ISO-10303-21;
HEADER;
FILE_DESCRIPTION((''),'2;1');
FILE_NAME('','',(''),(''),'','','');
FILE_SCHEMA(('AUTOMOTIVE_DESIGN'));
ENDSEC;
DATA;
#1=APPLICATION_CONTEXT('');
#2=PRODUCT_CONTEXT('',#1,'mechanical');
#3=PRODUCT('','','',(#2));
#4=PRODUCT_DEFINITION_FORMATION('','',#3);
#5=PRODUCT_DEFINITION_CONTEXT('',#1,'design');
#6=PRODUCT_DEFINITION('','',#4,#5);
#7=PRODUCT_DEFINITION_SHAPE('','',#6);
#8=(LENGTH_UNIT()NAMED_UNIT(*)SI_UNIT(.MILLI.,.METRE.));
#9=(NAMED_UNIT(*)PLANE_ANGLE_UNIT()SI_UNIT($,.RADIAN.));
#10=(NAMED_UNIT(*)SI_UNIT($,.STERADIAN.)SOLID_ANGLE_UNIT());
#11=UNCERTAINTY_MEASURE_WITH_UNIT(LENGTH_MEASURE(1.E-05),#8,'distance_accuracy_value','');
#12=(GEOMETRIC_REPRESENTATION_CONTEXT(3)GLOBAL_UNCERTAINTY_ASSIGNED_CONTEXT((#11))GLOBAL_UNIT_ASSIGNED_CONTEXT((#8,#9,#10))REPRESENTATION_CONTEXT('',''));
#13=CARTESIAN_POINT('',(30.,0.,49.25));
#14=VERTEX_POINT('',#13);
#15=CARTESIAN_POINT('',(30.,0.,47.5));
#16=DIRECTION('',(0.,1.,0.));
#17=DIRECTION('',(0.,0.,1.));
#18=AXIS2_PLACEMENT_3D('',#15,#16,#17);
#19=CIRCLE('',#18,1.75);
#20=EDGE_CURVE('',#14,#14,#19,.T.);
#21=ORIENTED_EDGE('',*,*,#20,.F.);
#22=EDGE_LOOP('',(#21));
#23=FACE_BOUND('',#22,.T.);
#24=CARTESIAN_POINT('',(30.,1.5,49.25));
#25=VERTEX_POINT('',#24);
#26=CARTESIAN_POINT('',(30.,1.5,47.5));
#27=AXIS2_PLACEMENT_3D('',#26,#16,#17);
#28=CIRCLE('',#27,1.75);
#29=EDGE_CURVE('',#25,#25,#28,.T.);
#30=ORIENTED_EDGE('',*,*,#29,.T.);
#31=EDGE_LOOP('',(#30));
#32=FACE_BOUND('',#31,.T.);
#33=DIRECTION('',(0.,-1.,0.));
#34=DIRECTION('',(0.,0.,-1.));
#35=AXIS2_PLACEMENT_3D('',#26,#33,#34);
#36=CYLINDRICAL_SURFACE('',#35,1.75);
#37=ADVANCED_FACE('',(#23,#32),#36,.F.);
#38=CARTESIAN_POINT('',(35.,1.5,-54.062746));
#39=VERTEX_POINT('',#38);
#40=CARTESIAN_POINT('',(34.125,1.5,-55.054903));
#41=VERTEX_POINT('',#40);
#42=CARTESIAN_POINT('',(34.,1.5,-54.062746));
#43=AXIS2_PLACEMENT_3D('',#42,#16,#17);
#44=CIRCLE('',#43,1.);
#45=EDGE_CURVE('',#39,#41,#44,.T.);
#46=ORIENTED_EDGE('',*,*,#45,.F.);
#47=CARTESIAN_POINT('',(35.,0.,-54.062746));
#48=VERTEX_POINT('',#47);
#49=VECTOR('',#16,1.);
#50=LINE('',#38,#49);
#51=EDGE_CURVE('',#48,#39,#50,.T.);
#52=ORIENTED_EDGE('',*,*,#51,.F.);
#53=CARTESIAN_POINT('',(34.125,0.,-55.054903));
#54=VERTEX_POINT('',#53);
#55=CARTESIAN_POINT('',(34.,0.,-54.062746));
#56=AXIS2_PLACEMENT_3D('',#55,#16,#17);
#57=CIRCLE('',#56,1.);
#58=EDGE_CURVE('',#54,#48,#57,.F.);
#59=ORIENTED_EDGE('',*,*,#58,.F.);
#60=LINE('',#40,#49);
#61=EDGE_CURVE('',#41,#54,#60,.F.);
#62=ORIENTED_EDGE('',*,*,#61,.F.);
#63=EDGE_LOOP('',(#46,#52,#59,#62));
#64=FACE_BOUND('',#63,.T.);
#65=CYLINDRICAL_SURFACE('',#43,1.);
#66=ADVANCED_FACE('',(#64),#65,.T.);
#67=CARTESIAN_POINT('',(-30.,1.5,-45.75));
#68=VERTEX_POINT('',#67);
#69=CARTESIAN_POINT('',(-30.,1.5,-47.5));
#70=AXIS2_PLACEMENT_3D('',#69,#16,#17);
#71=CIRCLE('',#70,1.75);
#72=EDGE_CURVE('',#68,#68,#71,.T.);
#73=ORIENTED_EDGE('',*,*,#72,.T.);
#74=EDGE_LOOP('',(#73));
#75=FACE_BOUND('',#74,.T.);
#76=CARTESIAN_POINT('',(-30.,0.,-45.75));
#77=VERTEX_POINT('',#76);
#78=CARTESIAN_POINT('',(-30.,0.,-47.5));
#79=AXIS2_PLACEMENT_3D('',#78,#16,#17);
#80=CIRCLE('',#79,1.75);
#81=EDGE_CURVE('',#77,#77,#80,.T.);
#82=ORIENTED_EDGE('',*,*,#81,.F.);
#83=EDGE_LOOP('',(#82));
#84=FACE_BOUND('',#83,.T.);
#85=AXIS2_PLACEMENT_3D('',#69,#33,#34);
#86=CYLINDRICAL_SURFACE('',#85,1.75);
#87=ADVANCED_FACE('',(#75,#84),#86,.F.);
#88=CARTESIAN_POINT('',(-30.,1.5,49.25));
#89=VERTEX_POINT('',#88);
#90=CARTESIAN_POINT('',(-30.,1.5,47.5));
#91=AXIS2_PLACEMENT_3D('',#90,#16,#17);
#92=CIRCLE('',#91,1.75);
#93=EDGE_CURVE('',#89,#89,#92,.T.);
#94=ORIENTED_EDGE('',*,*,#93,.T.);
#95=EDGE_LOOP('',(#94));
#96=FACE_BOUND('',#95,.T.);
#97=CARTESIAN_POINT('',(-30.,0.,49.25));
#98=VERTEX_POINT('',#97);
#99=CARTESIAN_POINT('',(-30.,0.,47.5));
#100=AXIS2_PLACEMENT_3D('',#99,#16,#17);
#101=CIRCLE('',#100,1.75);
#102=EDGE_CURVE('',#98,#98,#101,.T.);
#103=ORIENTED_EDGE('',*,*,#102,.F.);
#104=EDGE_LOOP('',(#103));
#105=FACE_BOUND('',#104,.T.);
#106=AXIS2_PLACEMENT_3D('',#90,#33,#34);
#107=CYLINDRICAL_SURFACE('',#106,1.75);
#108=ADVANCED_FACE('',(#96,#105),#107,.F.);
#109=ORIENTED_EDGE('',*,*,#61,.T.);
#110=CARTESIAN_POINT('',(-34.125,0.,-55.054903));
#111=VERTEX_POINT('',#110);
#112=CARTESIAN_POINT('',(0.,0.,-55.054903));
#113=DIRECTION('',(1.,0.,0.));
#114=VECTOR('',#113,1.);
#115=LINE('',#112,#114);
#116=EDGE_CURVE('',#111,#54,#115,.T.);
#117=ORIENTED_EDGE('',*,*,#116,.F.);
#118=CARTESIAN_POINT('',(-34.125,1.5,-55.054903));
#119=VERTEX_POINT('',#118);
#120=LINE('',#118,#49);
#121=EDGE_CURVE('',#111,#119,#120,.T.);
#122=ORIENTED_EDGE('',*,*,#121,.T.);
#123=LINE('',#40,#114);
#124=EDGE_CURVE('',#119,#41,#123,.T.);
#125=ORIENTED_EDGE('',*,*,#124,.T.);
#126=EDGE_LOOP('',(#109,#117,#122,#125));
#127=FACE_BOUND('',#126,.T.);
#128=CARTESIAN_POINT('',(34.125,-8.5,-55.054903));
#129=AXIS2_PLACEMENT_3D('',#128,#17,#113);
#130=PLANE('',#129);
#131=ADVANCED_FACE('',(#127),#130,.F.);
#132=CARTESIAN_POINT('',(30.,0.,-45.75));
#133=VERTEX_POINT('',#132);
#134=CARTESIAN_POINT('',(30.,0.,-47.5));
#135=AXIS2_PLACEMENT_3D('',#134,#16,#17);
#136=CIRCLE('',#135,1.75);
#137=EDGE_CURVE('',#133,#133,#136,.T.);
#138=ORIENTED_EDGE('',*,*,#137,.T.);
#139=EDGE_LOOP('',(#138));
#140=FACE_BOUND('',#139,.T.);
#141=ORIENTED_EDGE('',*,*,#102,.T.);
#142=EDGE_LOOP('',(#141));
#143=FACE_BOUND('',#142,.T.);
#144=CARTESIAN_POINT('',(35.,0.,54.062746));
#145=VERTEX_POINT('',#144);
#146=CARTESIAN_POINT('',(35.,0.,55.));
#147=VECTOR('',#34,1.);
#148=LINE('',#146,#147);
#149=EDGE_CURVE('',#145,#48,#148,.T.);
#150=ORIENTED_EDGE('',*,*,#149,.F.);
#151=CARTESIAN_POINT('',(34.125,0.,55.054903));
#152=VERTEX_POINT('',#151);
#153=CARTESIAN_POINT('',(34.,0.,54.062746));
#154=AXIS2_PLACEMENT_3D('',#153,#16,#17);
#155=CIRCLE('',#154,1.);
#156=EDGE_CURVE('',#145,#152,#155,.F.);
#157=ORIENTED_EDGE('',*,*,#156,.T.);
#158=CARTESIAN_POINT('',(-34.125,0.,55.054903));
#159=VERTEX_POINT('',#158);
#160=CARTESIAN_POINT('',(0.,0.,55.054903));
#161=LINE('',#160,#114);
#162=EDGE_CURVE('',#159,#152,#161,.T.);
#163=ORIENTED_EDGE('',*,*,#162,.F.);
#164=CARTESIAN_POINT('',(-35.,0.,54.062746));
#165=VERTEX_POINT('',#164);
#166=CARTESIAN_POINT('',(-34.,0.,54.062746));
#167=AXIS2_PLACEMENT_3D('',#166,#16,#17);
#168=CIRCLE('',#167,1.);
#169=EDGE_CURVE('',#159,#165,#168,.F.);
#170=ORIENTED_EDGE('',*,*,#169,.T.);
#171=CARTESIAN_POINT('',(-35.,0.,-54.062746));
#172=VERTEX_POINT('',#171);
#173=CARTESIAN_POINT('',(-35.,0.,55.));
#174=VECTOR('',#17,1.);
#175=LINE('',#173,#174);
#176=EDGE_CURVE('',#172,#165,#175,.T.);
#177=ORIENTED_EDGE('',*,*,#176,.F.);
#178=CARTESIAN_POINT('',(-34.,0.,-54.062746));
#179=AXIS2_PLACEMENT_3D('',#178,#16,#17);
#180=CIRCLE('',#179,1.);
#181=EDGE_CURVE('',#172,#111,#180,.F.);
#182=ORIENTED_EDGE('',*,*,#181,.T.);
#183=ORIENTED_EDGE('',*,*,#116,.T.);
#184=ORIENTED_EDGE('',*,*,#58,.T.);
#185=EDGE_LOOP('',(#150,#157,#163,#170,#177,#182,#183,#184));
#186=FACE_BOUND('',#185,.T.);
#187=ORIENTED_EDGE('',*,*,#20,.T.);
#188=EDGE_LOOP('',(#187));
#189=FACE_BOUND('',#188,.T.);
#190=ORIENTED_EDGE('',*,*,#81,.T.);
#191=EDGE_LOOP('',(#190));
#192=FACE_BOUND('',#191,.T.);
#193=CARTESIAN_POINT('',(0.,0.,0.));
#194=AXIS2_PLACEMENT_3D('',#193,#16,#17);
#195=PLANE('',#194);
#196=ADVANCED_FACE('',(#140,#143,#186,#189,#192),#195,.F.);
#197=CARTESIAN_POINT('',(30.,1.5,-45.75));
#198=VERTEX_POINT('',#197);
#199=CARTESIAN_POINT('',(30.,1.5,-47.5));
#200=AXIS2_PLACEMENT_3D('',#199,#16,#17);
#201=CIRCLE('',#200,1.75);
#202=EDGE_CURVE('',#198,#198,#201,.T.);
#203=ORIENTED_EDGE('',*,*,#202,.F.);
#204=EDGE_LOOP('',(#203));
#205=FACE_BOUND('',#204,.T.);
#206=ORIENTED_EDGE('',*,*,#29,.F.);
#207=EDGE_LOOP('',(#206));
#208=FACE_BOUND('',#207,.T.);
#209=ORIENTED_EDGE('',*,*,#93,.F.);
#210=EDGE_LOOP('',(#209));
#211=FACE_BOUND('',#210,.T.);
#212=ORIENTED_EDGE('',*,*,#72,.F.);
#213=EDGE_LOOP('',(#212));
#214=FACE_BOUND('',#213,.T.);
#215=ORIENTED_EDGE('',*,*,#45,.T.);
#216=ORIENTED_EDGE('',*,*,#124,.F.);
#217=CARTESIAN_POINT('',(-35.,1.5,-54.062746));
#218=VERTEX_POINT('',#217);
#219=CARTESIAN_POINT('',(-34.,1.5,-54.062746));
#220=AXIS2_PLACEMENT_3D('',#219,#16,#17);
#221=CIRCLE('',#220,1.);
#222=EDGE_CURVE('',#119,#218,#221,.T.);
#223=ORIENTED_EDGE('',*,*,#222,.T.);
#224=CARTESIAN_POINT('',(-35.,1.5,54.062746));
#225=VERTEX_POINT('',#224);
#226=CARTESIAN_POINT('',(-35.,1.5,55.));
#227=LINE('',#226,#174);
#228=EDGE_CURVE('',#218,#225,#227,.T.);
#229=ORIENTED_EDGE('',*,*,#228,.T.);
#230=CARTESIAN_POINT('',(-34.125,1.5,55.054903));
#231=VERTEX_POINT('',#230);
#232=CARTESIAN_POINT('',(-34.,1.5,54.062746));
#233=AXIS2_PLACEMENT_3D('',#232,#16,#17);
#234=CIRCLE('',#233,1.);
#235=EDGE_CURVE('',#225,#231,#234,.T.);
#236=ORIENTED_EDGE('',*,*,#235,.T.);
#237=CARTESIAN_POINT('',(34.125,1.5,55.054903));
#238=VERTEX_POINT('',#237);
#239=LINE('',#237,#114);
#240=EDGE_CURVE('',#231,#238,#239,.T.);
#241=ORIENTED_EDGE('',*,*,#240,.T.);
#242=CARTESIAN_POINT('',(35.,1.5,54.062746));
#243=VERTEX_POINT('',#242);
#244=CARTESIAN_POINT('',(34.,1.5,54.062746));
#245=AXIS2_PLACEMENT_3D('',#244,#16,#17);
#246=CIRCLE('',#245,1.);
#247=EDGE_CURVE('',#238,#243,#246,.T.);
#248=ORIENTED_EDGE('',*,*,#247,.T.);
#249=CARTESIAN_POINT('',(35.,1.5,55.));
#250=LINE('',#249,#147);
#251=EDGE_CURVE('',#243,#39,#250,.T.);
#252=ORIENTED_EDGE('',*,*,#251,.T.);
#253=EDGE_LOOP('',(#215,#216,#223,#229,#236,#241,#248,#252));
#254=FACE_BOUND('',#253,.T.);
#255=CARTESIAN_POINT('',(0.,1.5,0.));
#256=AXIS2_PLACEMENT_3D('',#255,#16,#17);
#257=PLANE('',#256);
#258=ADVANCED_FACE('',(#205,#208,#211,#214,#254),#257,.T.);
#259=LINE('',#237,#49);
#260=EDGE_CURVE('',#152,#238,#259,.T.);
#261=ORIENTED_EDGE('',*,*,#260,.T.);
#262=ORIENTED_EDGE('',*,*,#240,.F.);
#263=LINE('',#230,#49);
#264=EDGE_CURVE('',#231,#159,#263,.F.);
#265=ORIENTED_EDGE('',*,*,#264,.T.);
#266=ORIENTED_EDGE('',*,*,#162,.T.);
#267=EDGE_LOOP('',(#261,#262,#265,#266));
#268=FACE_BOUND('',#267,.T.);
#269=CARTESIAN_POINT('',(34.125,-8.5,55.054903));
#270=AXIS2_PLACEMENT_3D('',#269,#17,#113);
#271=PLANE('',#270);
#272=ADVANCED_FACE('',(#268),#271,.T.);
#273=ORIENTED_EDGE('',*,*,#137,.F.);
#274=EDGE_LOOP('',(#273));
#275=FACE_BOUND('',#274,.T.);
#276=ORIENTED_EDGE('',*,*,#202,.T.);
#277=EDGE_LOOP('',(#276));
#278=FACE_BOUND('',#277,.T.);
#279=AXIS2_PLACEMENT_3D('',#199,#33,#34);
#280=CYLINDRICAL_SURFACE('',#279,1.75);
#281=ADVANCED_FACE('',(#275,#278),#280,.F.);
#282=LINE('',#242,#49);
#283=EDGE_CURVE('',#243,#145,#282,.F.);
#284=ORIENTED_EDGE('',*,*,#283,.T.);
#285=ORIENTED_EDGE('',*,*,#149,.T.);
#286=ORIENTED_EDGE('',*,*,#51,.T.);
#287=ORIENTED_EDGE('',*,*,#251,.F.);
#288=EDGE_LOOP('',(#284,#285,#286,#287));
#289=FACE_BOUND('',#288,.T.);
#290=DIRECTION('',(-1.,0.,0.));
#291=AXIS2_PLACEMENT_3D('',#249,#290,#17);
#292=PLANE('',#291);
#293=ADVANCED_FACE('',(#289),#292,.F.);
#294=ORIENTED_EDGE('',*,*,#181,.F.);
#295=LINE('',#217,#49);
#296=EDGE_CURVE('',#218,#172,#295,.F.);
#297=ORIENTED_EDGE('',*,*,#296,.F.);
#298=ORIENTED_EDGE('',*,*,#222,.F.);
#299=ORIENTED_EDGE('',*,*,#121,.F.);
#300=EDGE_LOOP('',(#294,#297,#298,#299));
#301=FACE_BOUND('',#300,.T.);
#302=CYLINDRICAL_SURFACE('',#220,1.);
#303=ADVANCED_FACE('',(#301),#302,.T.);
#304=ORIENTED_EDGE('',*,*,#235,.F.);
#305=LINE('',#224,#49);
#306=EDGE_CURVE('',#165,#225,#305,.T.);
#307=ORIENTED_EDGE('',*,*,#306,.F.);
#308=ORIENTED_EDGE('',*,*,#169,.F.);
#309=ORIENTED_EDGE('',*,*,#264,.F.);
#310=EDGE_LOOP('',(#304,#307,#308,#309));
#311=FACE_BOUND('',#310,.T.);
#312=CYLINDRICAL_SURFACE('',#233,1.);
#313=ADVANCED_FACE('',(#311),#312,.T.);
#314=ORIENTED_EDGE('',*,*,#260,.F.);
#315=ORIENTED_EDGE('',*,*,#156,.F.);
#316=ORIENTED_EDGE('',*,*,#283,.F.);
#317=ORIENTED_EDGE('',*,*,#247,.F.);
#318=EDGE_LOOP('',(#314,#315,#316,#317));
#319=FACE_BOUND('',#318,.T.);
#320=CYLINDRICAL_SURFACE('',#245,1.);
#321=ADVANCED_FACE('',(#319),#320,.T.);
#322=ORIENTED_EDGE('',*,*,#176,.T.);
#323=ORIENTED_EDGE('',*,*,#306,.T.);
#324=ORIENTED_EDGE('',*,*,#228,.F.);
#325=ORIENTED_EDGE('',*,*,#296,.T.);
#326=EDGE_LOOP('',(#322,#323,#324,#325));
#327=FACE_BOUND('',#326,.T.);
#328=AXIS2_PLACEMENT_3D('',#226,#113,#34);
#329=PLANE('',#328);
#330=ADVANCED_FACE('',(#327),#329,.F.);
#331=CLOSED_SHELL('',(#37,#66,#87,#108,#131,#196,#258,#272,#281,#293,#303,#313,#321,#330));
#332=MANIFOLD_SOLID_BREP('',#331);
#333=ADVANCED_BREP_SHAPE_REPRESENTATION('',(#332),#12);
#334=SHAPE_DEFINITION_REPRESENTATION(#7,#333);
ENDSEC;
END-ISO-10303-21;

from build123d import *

# Parameters (mm, degrees)
SKETCH1_R           = 1.75
BOSS_EXTRUDE1_DEPTH = 1.5
FILLET1_R           = 7
FILLET2_R           = 1
FILLET3_R           = 50
SKETCH2_W           = 103.402572328
SKETCH2_H           = 105.78008475
CUT_EXTRUDE1_DEPTH  = 10


with BuildPart() as part:
    # Sketch1 → Boss-Extrude1 (new body)
    with BuildSketch(Plane(origin=(0, 0, 0), x_dir=(1, 0, 0), z_dir=(0, 1, 0))):
        Polygon((-35, -55), (-28, -55), (-28, -132), (0, -144), (28, -132), (28, -55), (35, -55), (35, 55), (28, 55), (28, 132), (0, 144), (-28, 132), (-28, 55), (-35, 55), align=None)
        with Locations(Location((-30, 47.5, 0), (0, 0, 270))):
            Circle(SKETCH1_R, mode=Mode.SUBTRACT)
        with Locations(Location((30, 47.5, 0), (0, 0, 270))):
            Circle(SKETCH1_R, mode=Mode.SUBTRACT)
        with Locations(Location((30, -47.5, 0), (0, 0, 270))):
            Circle(SKETCH1_R, mode=Mode.SUBTRACT)
        with Locations(Location((-30, -47.5, 0), (0, 0, 270))):
            Circle(SKETCH1_R, mode=Mode.SUBTRACT)
    extrude(amount=BOSS_EXTRUDE1_DEPTH)

    # Fillet1
    fillet1_edges = [part.edges().sort_by_distance(p)[0] for p in [
        (-28, 0.75, 55),
        (28, 0.75, 55),
        (28, 0.75, -55),
        (-28, 0.75, -55),
    ]]
    fillet(fillet1_edges, radius=FILLET1_R - 0.0001)  # a hair under: the kernel refuses the full size

    # Fillet2
    fillet2_edges = [part.edges().sort_by_distance(p)[0] for p in [
        (35, 0.75, -55),
        (35, 0.75, 55),
        (-35, 0.75, 55),
        (-35, 0.75, -55),
    ]]
    fillet(fillet2_edges, radius=FILLET2_R)

    # Fillet3
    fillet3_edges = [part.edges().sort_by_distance(p)[0] for p in [
        (0, 0.75, 144),
        (0, 0.75, -144),
    ]]
    fillet(fillet3_edges, radius=FILLET3_R)

    # Sketch2 → Cut-Extrude1 (cut)
    with BuildSketch(Plane(origin=(0, 1.5, 0), x_dir=(1, 0, 0), z_dir=(0, 1, 0))):
        with Locations((-17.576286164, 107.944945183)):
            Rectangle(SKETCH2_W, SKETCH2_H)
    cut_extrude1 = extrude(amount=-CUT_EXTRUDE1_DEPTH, mode=Mode.SUBTRACT)

    # Mirror1: Cut-Extrude1 across plane
    add(cut_extrude1.mirror(Plane.XY), mode=Mode.SUBTRACT)


solid = part.part
